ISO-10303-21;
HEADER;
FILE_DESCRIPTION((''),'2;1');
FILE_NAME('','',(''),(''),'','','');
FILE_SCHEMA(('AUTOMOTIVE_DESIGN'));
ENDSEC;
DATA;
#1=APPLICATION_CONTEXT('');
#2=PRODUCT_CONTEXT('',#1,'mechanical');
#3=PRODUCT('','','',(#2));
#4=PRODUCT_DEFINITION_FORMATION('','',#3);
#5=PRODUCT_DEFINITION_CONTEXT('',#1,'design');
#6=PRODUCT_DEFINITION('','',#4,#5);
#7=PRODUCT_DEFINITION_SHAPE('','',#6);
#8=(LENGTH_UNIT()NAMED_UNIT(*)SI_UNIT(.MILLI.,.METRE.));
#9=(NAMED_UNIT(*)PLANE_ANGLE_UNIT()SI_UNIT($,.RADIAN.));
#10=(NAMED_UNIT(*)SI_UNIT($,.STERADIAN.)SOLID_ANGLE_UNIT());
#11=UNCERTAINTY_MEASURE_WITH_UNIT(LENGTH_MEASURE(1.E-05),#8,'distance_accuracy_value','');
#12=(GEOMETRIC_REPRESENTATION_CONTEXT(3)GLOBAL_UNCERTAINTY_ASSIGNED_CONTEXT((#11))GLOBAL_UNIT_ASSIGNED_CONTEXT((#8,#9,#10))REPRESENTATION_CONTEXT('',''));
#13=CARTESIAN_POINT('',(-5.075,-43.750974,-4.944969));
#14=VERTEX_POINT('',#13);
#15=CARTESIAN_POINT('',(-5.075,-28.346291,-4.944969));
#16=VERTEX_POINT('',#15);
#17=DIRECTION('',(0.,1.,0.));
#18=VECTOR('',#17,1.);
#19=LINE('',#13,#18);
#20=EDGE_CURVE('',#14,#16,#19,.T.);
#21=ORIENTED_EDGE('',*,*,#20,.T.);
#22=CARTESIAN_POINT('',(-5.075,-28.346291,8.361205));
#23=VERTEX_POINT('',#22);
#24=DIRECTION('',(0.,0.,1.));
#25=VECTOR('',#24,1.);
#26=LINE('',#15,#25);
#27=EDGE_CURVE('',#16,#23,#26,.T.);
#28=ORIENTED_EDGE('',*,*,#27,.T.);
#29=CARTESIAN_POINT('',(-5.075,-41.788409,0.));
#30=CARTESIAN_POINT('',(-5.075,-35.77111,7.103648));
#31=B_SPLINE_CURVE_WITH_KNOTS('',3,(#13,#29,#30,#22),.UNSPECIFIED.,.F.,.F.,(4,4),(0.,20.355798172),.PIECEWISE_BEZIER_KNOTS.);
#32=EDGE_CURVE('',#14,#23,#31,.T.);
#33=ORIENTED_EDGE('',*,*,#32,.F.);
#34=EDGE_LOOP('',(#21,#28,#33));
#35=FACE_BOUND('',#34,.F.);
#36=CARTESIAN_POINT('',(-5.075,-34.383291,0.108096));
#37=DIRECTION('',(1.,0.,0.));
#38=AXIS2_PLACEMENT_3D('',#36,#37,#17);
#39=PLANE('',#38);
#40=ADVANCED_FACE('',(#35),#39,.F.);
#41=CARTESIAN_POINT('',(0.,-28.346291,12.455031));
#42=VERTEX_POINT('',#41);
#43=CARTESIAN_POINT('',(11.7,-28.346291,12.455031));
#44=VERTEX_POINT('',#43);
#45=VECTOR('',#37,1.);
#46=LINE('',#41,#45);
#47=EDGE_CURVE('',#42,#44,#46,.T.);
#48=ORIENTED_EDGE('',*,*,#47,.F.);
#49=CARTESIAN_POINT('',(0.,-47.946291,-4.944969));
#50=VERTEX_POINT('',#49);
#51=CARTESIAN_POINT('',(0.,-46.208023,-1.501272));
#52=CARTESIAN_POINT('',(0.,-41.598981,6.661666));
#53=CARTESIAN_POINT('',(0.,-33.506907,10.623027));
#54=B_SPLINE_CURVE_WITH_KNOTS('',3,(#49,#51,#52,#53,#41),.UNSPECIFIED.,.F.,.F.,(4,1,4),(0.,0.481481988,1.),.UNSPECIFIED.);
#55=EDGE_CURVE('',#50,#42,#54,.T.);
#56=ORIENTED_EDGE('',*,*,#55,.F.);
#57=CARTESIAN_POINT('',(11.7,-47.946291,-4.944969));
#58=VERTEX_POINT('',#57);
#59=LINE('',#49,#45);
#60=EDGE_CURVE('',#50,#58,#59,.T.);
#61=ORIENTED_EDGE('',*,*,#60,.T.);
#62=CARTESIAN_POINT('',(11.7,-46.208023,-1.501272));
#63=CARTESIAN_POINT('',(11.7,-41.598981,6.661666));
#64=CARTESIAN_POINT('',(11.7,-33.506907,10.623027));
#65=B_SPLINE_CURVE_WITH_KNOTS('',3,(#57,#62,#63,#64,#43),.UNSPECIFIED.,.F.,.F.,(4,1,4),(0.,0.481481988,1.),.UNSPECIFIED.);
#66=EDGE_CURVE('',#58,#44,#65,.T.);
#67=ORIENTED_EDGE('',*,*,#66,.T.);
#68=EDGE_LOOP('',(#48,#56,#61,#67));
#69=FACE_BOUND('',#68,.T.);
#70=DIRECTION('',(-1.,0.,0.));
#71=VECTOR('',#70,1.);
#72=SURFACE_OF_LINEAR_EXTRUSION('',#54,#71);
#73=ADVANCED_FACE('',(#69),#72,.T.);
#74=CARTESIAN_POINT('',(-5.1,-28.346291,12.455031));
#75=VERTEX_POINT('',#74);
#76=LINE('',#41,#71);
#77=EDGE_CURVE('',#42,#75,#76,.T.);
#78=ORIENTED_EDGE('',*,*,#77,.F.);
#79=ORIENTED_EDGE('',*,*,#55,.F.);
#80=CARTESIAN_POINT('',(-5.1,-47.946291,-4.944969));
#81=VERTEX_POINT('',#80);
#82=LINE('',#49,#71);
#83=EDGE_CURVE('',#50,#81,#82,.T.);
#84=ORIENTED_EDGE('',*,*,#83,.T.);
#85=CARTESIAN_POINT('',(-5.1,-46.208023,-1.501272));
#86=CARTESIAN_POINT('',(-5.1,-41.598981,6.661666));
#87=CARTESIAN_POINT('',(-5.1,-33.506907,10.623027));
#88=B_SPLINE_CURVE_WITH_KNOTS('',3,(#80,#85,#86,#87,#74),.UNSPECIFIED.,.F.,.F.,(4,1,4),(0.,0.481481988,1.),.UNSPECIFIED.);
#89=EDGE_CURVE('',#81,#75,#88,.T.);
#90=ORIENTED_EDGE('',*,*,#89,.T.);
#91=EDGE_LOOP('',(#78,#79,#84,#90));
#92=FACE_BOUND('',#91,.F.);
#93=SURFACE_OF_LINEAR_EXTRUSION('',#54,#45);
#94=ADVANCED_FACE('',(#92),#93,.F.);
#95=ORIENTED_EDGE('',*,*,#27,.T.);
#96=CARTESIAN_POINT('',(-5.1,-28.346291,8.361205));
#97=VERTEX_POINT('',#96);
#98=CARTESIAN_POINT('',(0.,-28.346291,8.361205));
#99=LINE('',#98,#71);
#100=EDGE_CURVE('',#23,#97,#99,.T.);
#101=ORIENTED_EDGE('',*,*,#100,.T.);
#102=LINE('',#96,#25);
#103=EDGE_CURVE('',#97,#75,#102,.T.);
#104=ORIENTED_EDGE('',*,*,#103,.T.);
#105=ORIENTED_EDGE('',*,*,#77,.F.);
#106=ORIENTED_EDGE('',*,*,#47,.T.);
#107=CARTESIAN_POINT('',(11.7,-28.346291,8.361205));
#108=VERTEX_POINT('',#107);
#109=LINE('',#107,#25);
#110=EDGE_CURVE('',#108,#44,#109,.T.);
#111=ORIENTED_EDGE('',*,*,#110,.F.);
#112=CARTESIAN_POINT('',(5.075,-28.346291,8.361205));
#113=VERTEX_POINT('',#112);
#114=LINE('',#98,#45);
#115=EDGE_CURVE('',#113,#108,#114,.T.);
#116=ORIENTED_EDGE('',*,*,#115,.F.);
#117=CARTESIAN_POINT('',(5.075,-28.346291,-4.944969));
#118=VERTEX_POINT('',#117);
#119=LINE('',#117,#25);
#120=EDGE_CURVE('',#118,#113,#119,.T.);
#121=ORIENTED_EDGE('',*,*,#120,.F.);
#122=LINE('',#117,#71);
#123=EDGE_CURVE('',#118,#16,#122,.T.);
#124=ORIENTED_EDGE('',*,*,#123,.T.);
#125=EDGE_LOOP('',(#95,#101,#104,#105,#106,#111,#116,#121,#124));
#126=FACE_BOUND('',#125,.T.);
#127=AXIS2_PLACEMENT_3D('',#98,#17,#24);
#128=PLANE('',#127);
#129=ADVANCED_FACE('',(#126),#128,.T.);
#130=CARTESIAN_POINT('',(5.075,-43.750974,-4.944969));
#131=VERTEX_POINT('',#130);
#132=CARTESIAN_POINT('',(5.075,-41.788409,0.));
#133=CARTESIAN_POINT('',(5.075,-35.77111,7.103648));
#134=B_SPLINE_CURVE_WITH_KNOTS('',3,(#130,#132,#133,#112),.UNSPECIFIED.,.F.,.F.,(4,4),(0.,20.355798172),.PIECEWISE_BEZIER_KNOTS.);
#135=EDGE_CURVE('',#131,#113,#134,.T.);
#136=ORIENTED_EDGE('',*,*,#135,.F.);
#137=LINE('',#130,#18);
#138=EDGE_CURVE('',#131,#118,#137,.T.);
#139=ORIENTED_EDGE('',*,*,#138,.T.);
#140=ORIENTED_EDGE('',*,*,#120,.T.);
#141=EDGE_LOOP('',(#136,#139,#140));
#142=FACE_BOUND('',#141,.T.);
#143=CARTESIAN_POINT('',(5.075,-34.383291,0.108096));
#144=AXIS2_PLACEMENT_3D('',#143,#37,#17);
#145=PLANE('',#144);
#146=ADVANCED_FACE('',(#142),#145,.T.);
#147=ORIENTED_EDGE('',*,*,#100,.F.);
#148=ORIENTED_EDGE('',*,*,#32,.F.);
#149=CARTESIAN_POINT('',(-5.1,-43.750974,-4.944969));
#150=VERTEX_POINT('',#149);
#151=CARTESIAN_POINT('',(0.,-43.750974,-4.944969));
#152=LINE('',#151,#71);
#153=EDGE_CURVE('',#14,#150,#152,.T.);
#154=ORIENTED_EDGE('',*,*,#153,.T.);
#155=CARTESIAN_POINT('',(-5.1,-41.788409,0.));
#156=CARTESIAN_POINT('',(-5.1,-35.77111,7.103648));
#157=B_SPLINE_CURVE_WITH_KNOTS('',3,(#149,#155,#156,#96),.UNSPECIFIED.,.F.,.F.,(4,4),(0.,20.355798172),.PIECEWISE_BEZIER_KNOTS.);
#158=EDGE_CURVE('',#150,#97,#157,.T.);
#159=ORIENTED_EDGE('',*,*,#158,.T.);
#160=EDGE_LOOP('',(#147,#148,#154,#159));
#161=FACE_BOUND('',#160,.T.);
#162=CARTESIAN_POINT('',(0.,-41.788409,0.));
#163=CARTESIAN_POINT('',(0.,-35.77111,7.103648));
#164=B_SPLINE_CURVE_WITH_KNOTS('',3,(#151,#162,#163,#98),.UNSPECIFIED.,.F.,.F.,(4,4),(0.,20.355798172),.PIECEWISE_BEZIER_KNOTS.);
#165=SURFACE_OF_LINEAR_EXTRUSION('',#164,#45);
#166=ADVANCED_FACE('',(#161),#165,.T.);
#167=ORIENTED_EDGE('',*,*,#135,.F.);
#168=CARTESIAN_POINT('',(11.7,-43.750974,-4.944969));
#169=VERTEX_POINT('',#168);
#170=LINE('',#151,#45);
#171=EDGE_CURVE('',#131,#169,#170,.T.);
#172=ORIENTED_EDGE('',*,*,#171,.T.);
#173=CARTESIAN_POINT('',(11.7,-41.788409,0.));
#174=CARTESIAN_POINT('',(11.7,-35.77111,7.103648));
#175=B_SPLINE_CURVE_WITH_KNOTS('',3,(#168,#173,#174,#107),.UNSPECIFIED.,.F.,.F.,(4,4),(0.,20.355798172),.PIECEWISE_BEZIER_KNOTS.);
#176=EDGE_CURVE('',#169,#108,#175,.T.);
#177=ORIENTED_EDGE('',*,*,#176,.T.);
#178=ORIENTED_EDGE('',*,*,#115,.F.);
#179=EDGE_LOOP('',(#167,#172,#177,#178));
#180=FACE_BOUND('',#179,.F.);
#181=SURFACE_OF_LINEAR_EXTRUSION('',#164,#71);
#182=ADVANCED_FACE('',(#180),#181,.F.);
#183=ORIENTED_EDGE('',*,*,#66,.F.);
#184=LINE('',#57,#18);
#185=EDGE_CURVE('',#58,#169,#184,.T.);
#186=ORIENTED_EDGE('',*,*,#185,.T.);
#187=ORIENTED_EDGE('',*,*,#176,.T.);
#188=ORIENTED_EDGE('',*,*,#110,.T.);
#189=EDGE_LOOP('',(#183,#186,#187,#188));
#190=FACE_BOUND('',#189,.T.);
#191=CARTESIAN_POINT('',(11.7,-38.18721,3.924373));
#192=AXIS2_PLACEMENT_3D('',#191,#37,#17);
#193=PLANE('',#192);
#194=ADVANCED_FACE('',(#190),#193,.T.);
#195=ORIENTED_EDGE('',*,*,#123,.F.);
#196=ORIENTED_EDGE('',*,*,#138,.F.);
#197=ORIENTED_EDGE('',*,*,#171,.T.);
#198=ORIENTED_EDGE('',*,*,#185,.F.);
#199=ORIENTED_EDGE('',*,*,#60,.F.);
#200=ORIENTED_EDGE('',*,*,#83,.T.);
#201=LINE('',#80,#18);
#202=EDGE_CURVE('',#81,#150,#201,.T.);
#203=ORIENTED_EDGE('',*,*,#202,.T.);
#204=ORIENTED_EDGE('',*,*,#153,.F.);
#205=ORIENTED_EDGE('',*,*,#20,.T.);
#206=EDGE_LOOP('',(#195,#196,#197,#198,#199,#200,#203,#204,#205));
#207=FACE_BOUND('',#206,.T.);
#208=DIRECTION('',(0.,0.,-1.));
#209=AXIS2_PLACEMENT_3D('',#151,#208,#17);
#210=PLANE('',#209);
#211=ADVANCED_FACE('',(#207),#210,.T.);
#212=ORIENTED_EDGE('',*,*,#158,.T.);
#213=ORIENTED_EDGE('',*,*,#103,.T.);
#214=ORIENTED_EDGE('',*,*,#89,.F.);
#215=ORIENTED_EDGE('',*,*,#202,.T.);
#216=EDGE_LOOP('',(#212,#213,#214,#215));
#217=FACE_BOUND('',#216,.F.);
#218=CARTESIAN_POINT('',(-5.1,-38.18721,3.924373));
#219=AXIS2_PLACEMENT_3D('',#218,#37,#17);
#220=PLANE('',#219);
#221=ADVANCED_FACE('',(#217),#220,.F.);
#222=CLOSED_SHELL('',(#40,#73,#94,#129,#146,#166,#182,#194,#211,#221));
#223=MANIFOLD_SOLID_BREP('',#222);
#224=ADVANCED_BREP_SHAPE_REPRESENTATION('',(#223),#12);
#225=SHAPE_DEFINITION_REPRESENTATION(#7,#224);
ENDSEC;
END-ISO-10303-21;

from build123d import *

# Parameters (mm, degrees)
F3_DEPTH      = 5.075
F4_DEPTH      = 11.7
F4_DEPTH_BACK = 5.1


# Not quite as in the source:
# - the program builds the solid bodies; features that only make, move or delete a surface that nothing else refers to are left out


with BuildPart() as f3:
    # F2 (on Right) → F3 (new body, symmetric)
    with BuildSketch(Plane.YZ):
        with BuildLine():
            Line((-28.3462911332, -4.9449687588), (-28.3462911332, 8.3612054586))
            add(Edge.make_bspline(
                [(-43.7509737622, -4.9449687588), (-41.7884092148, 0), (-35.7711096695, 7.1036480367), (-28.3462911332, 8.3612054586)],
                knots=[0, 0, 0, 0, 20.3557981716, 20.3557981716, 20.3557981716, 20.3557981716], degree=3))
            Line((-43.7509737622, -4.9449687588), (-28.3462911332, -4.9449687588))
        make_face()
    extrude(amount=F3_DEPTH, both=True)

    # F2 (on Right) → F4 (join, two sides)
    with BuildSketch(Plane.YZ) as f4_sk:
        with BuildLine():
            Line((-28.3462911332, 8.3612054586), (-28.3462911332, 12.4550312412))
            add(Edge.make_bspline(
                [(-47.9462911332, -4.9449687588), (-46.2080227994, -1.5012717921), (-41.5989810613, 6.6616658975), (-33.5069069781, 10.6230272322), (-28.3462911332, 12.4550312412)],
                knots=[0, 0, 0, 0, 0.4814819879, 1, 1, 1, 1], degree=3))
            Line((-47.9462911332, -4.9449687588), (-43.7509737622, -4.9449687588))
            add(Edge.make_bspline(
                [(-43.7509737622, -4.9449687588), (-41.7884092148, 0), (-35.7711096695, 7.1036480367), (-28.3462911332, 8.3612054586)],
                knots=[0, 0, 0, 0, 20.3557981716, 20.3557981716, 20.3557981716, 20.3557981716], degree=3))
        make_face()
    extrude(amount=F4_DEPTH)
    extrude(f4_sk.sketch, amount=-F4_DEPTH_BACK)


solid = f3.part
